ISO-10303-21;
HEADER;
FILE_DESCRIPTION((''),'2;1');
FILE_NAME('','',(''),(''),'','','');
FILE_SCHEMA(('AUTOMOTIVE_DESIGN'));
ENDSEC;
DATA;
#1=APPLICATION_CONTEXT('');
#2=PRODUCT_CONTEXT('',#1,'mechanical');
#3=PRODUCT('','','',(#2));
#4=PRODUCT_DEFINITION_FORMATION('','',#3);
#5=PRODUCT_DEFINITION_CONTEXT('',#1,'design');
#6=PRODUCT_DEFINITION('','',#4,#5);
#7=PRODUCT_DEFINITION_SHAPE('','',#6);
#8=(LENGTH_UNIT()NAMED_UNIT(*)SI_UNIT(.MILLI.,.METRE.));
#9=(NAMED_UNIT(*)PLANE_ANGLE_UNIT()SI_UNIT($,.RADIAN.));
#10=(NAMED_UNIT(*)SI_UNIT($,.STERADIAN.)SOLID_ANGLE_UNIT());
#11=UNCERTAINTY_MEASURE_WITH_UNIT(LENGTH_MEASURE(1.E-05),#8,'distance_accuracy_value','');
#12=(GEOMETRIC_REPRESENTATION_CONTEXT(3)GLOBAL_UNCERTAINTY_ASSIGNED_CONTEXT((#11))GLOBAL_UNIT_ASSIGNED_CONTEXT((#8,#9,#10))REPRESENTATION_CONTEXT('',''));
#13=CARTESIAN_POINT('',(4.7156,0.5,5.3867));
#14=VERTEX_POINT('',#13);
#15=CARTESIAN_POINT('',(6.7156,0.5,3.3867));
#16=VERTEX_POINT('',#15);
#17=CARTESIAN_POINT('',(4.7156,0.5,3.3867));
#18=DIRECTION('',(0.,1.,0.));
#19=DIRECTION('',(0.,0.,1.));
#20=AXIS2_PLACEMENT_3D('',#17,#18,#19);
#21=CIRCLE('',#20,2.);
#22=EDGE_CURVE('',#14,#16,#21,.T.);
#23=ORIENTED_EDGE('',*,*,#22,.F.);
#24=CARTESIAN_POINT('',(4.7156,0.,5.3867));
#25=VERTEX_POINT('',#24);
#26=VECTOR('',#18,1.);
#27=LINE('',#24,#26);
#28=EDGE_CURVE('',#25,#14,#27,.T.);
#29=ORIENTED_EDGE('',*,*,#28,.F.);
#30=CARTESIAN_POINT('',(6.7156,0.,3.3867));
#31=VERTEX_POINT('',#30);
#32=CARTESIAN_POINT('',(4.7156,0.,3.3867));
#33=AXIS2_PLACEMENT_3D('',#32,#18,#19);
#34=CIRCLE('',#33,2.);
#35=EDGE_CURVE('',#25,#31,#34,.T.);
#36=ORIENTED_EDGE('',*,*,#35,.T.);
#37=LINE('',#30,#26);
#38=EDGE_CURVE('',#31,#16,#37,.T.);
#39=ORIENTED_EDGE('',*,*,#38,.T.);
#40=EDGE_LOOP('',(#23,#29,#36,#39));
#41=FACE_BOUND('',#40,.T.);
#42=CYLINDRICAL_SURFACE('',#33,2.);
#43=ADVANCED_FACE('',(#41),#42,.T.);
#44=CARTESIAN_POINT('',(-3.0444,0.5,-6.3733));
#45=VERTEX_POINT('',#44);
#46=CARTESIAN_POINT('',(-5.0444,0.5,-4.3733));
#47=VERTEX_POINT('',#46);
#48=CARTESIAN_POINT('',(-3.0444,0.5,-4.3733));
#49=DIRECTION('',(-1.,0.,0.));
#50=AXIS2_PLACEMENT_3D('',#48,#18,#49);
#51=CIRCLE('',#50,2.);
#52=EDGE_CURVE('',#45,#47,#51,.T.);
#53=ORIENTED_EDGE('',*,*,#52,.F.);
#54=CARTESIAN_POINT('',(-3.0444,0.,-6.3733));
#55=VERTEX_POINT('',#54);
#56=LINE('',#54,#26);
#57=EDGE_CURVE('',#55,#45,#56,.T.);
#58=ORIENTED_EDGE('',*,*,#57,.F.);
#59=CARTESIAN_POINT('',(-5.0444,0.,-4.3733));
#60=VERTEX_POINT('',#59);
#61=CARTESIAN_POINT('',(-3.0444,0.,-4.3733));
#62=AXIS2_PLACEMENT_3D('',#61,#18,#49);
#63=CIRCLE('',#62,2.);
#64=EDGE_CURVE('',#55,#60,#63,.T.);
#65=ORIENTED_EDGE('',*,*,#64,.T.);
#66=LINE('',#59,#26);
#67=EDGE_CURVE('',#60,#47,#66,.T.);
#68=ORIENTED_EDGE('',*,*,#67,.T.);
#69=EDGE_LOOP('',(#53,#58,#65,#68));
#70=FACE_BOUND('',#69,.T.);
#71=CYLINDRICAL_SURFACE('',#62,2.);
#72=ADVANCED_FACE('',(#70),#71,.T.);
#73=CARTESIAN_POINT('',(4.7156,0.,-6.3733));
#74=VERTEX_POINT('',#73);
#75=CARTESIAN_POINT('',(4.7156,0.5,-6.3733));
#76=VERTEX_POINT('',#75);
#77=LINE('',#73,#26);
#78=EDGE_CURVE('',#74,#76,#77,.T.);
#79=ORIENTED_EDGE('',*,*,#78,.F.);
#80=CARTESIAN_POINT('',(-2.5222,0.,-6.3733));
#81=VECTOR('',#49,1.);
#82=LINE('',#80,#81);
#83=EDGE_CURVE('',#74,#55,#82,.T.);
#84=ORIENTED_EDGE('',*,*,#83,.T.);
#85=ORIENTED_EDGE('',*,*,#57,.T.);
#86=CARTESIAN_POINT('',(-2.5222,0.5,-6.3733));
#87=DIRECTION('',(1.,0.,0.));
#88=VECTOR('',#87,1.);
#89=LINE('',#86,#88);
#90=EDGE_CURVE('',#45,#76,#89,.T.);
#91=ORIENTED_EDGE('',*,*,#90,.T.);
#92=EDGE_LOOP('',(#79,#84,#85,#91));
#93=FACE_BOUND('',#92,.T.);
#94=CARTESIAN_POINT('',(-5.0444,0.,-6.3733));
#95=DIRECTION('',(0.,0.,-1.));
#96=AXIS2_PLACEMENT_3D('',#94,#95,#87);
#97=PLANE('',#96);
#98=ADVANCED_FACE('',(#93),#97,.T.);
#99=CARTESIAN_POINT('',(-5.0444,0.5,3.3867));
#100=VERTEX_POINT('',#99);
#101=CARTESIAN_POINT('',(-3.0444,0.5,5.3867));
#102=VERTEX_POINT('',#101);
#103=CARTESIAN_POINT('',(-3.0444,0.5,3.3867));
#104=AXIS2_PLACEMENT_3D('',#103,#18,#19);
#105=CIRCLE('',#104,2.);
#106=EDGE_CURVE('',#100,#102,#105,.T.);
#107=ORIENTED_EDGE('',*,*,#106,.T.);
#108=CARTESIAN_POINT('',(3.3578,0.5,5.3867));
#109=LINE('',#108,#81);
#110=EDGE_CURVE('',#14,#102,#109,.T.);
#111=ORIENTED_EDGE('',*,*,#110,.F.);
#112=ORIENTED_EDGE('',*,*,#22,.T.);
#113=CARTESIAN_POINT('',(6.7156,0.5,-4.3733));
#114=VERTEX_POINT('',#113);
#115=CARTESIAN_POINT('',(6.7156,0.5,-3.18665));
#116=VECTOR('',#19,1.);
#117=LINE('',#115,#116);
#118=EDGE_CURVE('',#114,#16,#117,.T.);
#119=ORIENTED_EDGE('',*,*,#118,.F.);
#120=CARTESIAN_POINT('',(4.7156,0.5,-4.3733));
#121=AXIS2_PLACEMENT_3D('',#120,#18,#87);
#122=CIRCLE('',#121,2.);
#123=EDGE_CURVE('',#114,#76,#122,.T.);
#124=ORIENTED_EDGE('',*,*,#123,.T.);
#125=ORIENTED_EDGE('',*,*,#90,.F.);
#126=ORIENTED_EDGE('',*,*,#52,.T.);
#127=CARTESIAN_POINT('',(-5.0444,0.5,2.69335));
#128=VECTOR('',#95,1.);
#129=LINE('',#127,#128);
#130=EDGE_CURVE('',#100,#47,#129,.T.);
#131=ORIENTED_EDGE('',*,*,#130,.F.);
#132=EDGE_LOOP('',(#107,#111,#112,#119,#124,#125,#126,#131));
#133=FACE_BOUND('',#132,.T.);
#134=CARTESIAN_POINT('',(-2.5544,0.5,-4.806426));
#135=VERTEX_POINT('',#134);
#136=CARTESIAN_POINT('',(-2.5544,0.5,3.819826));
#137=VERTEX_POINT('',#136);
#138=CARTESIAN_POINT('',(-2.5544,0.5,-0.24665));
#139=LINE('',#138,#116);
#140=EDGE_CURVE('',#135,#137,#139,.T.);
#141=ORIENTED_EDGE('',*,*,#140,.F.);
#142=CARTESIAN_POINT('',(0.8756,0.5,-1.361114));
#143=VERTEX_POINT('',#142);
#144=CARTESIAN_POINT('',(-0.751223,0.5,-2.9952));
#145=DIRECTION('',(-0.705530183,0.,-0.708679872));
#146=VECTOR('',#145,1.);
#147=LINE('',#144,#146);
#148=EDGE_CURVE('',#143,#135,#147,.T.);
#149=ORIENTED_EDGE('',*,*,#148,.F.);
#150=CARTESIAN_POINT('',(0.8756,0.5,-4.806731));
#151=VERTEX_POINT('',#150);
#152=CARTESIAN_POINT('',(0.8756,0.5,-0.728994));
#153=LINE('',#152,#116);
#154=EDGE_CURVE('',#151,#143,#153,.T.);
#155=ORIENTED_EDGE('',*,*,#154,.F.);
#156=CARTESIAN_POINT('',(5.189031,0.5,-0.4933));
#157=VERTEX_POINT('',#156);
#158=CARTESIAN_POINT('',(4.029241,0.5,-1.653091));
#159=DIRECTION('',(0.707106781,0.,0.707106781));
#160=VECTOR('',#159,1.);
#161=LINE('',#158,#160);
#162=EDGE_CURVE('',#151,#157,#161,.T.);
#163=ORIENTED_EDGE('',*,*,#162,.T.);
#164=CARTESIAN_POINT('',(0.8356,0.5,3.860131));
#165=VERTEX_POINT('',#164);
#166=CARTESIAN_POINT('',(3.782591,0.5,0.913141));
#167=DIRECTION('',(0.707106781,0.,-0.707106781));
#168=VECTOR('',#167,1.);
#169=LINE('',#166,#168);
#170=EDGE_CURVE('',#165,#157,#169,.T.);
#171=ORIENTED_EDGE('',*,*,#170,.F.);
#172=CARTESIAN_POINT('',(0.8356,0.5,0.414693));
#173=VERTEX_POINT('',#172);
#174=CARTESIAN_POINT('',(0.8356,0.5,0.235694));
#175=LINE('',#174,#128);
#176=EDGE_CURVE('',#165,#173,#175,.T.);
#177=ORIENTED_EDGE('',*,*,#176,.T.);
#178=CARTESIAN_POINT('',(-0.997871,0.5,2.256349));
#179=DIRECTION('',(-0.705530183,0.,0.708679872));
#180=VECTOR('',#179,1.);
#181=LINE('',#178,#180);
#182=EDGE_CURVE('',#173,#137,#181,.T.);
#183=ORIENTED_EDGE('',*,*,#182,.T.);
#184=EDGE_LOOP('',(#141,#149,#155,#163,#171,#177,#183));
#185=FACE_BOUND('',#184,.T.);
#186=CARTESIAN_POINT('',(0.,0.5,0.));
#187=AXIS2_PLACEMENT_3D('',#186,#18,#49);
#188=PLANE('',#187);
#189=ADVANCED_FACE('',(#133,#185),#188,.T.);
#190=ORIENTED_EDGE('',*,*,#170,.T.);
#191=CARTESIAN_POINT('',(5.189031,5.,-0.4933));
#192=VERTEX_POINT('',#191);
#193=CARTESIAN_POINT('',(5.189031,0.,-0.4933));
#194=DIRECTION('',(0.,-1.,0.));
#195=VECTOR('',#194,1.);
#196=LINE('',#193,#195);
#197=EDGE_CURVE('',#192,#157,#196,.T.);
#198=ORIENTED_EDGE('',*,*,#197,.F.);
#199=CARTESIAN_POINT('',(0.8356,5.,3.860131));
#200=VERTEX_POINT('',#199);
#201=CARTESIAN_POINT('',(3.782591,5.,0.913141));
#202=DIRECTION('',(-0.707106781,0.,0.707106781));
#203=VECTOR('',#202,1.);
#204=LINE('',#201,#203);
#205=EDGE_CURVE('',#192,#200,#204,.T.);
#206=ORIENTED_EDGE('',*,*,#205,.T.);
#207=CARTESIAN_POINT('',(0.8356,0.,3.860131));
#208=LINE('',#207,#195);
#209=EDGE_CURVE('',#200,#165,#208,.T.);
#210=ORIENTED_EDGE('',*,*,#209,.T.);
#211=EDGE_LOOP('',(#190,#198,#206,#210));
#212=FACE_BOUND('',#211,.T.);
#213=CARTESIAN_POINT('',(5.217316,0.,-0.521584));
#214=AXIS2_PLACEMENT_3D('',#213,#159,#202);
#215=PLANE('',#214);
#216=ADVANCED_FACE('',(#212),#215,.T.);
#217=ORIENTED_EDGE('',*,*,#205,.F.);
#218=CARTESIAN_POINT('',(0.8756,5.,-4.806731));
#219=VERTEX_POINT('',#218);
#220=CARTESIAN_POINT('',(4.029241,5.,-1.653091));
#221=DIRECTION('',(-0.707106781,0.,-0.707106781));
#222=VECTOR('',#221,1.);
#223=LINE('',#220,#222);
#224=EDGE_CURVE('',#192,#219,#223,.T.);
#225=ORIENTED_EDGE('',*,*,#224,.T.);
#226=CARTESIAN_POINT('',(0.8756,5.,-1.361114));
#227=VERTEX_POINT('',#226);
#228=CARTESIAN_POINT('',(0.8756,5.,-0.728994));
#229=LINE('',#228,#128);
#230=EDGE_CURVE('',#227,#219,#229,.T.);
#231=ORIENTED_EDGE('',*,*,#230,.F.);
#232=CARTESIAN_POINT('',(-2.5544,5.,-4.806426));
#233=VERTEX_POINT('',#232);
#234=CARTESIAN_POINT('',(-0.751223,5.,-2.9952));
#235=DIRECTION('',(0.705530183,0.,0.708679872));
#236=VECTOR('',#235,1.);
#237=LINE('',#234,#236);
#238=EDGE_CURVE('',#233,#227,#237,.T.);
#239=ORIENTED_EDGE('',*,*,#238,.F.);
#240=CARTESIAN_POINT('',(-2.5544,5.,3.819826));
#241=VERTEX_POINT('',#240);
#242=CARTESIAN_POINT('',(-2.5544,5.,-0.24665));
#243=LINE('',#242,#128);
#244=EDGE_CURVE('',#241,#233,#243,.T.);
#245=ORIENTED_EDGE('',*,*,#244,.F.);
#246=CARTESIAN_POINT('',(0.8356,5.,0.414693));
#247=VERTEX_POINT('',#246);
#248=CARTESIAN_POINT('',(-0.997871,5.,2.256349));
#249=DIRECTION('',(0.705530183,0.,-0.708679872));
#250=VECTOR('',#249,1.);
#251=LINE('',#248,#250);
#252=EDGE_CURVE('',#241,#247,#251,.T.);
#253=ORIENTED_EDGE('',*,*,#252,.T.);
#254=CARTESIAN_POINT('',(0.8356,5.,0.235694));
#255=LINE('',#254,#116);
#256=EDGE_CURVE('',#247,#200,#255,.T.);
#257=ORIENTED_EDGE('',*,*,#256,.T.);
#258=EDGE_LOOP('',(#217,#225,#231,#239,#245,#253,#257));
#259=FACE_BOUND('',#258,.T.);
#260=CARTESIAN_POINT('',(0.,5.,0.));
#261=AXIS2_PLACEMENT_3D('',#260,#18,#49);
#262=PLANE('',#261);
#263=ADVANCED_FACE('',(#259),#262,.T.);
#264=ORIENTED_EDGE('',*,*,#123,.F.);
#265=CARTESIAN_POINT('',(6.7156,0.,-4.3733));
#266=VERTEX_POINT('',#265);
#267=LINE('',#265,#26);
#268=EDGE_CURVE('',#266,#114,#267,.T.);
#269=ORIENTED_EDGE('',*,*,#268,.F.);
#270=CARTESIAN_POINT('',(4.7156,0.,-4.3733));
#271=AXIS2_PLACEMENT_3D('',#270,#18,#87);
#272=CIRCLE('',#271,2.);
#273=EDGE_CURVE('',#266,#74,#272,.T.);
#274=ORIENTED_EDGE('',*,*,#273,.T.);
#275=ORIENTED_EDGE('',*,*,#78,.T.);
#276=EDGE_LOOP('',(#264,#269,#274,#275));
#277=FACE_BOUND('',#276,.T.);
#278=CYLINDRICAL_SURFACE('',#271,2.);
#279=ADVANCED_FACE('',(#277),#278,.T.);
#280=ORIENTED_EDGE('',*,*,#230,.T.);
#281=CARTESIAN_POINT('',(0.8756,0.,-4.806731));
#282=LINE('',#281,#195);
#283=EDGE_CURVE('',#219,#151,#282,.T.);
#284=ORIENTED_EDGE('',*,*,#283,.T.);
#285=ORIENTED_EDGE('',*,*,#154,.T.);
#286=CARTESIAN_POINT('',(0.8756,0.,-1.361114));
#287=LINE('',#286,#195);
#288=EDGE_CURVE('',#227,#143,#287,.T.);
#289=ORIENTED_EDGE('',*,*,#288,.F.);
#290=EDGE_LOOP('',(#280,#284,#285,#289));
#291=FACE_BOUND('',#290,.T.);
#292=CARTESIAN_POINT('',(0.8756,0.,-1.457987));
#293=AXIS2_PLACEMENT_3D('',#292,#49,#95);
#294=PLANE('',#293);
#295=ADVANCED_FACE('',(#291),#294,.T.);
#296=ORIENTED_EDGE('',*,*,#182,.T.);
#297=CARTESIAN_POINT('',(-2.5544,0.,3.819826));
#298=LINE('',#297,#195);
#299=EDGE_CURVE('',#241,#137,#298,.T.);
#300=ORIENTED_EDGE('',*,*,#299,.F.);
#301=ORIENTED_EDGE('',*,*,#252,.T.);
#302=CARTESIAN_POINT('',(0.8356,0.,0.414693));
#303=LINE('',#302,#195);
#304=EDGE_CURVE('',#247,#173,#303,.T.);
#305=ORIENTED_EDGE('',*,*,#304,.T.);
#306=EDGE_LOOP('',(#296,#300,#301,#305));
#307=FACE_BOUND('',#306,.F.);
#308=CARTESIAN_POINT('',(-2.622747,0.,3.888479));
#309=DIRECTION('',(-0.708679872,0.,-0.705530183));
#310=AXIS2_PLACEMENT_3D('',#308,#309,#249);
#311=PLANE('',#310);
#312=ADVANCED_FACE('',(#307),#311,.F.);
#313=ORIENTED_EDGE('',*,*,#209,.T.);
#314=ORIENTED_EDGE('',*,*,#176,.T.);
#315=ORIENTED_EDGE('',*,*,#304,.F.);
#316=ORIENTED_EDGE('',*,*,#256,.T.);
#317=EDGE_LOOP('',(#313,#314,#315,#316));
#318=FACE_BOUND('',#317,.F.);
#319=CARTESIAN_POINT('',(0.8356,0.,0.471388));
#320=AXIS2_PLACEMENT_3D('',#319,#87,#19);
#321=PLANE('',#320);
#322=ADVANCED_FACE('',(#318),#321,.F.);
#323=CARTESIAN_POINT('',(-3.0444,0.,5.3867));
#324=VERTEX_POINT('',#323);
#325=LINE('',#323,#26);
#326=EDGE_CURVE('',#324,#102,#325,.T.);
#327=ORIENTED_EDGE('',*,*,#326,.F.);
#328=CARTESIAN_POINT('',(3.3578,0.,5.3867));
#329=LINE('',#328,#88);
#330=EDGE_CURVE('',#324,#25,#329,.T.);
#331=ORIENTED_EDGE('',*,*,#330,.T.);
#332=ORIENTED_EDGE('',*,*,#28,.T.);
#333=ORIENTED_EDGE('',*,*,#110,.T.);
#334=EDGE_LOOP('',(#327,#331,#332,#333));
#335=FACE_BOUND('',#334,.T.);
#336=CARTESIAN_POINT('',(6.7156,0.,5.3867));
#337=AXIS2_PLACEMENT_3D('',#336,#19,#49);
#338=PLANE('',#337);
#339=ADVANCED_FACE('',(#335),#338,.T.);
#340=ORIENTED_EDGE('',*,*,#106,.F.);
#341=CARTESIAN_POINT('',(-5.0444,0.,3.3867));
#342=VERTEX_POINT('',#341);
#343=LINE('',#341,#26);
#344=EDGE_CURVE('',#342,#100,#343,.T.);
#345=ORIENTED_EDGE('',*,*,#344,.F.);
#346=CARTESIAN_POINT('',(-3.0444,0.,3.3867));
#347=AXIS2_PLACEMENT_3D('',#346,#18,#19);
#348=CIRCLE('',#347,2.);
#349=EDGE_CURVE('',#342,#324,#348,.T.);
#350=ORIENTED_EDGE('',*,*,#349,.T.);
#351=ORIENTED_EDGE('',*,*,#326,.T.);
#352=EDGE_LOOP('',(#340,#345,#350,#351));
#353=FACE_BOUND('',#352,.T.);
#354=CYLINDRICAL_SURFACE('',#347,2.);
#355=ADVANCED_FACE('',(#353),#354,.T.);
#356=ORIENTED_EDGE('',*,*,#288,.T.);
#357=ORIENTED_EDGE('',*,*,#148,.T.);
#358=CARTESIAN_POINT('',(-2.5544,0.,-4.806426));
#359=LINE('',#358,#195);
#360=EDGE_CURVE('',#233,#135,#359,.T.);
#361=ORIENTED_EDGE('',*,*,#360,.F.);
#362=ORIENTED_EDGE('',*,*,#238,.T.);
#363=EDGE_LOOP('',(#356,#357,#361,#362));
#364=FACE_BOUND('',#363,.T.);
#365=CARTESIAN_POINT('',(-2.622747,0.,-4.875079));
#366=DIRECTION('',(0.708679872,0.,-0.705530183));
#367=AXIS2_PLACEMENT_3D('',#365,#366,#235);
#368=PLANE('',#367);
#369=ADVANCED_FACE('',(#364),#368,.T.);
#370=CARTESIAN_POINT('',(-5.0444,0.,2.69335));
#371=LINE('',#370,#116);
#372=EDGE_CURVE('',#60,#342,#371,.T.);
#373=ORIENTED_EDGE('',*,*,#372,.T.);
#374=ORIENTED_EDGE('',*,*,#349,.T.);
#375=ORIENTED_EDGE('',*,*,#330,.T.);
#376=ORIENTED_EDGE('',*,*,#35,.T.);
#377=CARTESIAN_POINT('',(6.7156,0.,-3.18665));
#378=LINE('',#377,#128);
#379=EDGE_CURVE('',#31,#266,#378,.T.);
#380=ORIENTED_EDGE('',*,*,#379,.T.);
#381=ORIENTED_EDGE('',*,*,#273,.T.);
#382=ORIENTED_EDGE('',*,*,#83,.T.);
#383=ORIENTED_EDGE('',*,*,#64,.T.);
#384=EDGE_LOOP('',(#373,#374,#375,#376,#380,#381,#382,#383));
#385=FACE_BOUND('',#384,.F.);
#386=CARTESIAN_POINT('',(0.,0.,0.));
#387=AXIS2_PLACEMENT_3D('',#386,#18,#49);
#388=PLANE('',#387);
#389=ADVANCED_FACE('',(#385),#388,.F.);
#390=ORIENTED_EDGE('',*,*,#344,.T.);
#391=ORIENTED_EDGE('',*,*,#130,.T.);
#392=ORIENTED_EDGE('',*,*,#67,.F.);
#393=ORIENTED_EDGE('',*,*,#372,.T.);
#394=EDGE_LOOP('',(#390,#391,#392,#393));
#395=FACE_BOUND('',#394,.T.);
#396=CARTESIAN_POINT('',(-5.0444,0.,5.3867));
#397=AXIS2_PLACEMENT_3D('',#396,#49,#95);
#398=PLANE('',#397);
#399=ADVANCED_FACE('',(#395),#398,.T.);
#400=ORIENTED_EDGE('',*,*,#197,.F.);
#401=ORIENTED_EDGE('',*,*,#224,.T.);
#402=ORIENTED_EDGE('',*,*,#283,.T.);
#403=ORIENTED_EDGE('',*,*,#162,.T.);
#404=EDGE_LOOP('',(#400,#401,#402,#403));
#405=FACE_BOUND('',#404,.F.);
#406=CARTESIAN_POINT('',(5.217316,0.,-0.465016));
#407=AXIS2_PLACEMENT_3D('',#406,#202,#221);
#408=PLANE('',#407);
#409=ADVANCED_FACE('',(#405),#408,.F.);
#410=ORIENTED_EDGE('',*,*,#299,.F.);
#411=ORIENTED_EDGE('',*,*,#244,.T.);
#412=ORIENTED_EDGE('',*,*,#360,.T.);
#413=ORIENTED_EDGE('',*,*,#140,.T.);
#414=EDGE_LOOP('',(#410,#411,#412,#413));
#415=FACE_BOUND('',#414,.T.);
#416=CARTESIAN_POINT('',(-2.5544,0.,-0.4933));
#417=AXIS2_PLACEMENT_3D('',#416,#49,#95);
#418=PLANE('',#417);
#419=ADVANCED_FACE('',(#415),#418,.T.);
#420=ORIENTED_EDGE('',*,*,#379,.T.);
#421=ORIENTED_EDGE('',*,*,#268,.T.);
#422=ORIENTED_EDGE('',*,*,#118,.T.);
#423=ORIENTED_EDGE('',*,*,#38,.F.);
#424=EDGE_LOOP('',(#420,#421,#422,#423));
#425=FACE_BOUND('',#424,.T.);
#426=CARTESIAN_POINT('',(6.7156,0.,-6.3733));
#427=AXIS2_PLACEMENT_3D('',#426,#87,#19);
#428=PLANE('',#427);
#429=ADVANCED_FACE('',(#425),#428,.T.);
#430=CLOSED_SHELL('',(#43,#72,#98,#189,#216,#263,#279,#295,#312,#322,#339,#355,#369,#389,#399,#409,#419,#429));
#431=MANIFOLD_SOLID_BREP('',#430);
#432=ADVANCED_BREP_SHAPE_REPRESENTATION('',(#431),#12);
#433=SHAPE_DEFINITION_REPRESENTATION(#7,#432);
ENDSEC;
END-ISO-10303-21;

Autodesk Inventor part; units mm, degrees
ref_plane "YZ Plane" through (0, 0, 0) normal (1, 0, 0) x (0, 1, 0)
ref_plane "XZ Plane" through (0, 0, 0) normal (0, 1, 0) x (-1, 0, 0)
ref_plane "XY Plane" through (0, 0, 0) normal (0, 0, 1) x (1, 0, 0)
sketch "Szkic1" plane through (0, 0, 0) normal (0, 1, 0) x (-1, 0, 0)
  line L0 (4.0644, 4.4067) -> (-5.7356, 4.4067)
  line L1 (-5.7356, 4.4067) -> (-5.7356, -5.3933)
  line L2 (-5.7356, -5.3933) -> (4.0644, -5.3933)
  line L3 (4.0644, -5.3933) -> (4.0644, 4.4067)
  line L4 (4.0644, 4.4067) -> (-5.7356, -5.3933) construction
  line L5 (-5.7356, 4.4067) -> (4.0644, -5.3933) construction
  line L6 (-0.8356, -0.4933) -> (-0.8356, -4.9033)
  line L7 (-0.8356, -0.4933) -> (-5.2456, -0.4933)
  line L8 (-5.2456, -0.4933) -> (-0.8356, -4.9033)
  line L9 (-0.8356, -0.4933) -> (-1.796, -0.4933)
  line L10 (-0.8356, -0.4933) -> (2.5944, -0.4933)
  line L11 (-0.8356, -0.4933) -> (2.5944, -0.4933) construction
  line L12 (2.5944, -0.4933) -> (2.5944, -4.9033)
  line L13 (2.5944, -4.9033) -> (-1.796, -0.4933)
  line L14 (-5.2456, -0.4933) -> (-0.8356, 3.9167)
  line L15 (2.5944, 3.9167) -> (-1.796, -0.4933)
  line L16 (2.5944, -0.4933) -> (2.5944, 3.9167)
  line L17 (-0.8356, -0.4933) -> (-0.8356, 3.9167)
  line L18 (-6.7156, 5.3867) -> (5.0444, 5.3867)
  line L19 (5.0444, 5.3867) -> (5.0444, -6.3733)
  line L20 (5.0444, -6.3733) -> (-6.7156, -6.3733)
  line L21 (-6.7156, -6.3733) -> (-6.7156, 5.3867)
  line L22 (-6.7156, 5.3867) -> (5.0444, -6.3733) construction
  line L23 (5.0444, 5.3867) -> (-6.7156, -6.3733) construction
  point P0 (0, 0)
  point P1 (-0.8356, -1.458)
  point P2 (-0.8356, 0.4714)
  dimension "d0" = 9.8
  dimension "d1" = 9.8
  dimension "d2" = 4.41
  dimension "d3" = 4.41
  dimension "d4" = 0.9604
  dimension "d5" = 3.43
  dimension "d6" = 0
  dimension "d7" = 4.41
  dimension "d8" = 90
  dimension "d9" = 11.76
  dimension "d10" = 11.76
extrude "Wyciągnięcie proste1" add sketch "Szkic1" along normal blind 0.5 contours L3 L2 L1 L0 | L10 L12 L13 L6 | L6 L13 L7 | L17 L15 L16 L10 | L7 L15 L17 | L6 L8 L7 L13 | L7 L14 L17 L15 | L18 L19 L20 L21
extrude "Wyciągnięcie proste2" add sketch "Szkic1" along normal blind 5 contours L10 L12 L13 L6 | L6 L13 L7 | L17 L15 L16 L10 | L7 L15 L17 | L6 L8 L7 L13 | L7 L14 L17 L15
fillet "Zaokrąglenie1" radius 2 4 edges at (6.7156, 0.25, 5.3867) (-5.0444, 0.25, 5.3867) (6.7156, 0.25, -6.3733) (-5.0444, 0.25, -6.3733)
offset faces "Rozmiar1" outward -0.04 faces at (2.3056, 2, 2.4467) (-1.4511, 2, 2.7682) (3.7756, 2, -1.9633) (0.8356, 2, -3.7549) (-0.3078, 2, -2.6064) (-2.5944, 3.5, -1.9633)
properties part number "guzik_musik"
